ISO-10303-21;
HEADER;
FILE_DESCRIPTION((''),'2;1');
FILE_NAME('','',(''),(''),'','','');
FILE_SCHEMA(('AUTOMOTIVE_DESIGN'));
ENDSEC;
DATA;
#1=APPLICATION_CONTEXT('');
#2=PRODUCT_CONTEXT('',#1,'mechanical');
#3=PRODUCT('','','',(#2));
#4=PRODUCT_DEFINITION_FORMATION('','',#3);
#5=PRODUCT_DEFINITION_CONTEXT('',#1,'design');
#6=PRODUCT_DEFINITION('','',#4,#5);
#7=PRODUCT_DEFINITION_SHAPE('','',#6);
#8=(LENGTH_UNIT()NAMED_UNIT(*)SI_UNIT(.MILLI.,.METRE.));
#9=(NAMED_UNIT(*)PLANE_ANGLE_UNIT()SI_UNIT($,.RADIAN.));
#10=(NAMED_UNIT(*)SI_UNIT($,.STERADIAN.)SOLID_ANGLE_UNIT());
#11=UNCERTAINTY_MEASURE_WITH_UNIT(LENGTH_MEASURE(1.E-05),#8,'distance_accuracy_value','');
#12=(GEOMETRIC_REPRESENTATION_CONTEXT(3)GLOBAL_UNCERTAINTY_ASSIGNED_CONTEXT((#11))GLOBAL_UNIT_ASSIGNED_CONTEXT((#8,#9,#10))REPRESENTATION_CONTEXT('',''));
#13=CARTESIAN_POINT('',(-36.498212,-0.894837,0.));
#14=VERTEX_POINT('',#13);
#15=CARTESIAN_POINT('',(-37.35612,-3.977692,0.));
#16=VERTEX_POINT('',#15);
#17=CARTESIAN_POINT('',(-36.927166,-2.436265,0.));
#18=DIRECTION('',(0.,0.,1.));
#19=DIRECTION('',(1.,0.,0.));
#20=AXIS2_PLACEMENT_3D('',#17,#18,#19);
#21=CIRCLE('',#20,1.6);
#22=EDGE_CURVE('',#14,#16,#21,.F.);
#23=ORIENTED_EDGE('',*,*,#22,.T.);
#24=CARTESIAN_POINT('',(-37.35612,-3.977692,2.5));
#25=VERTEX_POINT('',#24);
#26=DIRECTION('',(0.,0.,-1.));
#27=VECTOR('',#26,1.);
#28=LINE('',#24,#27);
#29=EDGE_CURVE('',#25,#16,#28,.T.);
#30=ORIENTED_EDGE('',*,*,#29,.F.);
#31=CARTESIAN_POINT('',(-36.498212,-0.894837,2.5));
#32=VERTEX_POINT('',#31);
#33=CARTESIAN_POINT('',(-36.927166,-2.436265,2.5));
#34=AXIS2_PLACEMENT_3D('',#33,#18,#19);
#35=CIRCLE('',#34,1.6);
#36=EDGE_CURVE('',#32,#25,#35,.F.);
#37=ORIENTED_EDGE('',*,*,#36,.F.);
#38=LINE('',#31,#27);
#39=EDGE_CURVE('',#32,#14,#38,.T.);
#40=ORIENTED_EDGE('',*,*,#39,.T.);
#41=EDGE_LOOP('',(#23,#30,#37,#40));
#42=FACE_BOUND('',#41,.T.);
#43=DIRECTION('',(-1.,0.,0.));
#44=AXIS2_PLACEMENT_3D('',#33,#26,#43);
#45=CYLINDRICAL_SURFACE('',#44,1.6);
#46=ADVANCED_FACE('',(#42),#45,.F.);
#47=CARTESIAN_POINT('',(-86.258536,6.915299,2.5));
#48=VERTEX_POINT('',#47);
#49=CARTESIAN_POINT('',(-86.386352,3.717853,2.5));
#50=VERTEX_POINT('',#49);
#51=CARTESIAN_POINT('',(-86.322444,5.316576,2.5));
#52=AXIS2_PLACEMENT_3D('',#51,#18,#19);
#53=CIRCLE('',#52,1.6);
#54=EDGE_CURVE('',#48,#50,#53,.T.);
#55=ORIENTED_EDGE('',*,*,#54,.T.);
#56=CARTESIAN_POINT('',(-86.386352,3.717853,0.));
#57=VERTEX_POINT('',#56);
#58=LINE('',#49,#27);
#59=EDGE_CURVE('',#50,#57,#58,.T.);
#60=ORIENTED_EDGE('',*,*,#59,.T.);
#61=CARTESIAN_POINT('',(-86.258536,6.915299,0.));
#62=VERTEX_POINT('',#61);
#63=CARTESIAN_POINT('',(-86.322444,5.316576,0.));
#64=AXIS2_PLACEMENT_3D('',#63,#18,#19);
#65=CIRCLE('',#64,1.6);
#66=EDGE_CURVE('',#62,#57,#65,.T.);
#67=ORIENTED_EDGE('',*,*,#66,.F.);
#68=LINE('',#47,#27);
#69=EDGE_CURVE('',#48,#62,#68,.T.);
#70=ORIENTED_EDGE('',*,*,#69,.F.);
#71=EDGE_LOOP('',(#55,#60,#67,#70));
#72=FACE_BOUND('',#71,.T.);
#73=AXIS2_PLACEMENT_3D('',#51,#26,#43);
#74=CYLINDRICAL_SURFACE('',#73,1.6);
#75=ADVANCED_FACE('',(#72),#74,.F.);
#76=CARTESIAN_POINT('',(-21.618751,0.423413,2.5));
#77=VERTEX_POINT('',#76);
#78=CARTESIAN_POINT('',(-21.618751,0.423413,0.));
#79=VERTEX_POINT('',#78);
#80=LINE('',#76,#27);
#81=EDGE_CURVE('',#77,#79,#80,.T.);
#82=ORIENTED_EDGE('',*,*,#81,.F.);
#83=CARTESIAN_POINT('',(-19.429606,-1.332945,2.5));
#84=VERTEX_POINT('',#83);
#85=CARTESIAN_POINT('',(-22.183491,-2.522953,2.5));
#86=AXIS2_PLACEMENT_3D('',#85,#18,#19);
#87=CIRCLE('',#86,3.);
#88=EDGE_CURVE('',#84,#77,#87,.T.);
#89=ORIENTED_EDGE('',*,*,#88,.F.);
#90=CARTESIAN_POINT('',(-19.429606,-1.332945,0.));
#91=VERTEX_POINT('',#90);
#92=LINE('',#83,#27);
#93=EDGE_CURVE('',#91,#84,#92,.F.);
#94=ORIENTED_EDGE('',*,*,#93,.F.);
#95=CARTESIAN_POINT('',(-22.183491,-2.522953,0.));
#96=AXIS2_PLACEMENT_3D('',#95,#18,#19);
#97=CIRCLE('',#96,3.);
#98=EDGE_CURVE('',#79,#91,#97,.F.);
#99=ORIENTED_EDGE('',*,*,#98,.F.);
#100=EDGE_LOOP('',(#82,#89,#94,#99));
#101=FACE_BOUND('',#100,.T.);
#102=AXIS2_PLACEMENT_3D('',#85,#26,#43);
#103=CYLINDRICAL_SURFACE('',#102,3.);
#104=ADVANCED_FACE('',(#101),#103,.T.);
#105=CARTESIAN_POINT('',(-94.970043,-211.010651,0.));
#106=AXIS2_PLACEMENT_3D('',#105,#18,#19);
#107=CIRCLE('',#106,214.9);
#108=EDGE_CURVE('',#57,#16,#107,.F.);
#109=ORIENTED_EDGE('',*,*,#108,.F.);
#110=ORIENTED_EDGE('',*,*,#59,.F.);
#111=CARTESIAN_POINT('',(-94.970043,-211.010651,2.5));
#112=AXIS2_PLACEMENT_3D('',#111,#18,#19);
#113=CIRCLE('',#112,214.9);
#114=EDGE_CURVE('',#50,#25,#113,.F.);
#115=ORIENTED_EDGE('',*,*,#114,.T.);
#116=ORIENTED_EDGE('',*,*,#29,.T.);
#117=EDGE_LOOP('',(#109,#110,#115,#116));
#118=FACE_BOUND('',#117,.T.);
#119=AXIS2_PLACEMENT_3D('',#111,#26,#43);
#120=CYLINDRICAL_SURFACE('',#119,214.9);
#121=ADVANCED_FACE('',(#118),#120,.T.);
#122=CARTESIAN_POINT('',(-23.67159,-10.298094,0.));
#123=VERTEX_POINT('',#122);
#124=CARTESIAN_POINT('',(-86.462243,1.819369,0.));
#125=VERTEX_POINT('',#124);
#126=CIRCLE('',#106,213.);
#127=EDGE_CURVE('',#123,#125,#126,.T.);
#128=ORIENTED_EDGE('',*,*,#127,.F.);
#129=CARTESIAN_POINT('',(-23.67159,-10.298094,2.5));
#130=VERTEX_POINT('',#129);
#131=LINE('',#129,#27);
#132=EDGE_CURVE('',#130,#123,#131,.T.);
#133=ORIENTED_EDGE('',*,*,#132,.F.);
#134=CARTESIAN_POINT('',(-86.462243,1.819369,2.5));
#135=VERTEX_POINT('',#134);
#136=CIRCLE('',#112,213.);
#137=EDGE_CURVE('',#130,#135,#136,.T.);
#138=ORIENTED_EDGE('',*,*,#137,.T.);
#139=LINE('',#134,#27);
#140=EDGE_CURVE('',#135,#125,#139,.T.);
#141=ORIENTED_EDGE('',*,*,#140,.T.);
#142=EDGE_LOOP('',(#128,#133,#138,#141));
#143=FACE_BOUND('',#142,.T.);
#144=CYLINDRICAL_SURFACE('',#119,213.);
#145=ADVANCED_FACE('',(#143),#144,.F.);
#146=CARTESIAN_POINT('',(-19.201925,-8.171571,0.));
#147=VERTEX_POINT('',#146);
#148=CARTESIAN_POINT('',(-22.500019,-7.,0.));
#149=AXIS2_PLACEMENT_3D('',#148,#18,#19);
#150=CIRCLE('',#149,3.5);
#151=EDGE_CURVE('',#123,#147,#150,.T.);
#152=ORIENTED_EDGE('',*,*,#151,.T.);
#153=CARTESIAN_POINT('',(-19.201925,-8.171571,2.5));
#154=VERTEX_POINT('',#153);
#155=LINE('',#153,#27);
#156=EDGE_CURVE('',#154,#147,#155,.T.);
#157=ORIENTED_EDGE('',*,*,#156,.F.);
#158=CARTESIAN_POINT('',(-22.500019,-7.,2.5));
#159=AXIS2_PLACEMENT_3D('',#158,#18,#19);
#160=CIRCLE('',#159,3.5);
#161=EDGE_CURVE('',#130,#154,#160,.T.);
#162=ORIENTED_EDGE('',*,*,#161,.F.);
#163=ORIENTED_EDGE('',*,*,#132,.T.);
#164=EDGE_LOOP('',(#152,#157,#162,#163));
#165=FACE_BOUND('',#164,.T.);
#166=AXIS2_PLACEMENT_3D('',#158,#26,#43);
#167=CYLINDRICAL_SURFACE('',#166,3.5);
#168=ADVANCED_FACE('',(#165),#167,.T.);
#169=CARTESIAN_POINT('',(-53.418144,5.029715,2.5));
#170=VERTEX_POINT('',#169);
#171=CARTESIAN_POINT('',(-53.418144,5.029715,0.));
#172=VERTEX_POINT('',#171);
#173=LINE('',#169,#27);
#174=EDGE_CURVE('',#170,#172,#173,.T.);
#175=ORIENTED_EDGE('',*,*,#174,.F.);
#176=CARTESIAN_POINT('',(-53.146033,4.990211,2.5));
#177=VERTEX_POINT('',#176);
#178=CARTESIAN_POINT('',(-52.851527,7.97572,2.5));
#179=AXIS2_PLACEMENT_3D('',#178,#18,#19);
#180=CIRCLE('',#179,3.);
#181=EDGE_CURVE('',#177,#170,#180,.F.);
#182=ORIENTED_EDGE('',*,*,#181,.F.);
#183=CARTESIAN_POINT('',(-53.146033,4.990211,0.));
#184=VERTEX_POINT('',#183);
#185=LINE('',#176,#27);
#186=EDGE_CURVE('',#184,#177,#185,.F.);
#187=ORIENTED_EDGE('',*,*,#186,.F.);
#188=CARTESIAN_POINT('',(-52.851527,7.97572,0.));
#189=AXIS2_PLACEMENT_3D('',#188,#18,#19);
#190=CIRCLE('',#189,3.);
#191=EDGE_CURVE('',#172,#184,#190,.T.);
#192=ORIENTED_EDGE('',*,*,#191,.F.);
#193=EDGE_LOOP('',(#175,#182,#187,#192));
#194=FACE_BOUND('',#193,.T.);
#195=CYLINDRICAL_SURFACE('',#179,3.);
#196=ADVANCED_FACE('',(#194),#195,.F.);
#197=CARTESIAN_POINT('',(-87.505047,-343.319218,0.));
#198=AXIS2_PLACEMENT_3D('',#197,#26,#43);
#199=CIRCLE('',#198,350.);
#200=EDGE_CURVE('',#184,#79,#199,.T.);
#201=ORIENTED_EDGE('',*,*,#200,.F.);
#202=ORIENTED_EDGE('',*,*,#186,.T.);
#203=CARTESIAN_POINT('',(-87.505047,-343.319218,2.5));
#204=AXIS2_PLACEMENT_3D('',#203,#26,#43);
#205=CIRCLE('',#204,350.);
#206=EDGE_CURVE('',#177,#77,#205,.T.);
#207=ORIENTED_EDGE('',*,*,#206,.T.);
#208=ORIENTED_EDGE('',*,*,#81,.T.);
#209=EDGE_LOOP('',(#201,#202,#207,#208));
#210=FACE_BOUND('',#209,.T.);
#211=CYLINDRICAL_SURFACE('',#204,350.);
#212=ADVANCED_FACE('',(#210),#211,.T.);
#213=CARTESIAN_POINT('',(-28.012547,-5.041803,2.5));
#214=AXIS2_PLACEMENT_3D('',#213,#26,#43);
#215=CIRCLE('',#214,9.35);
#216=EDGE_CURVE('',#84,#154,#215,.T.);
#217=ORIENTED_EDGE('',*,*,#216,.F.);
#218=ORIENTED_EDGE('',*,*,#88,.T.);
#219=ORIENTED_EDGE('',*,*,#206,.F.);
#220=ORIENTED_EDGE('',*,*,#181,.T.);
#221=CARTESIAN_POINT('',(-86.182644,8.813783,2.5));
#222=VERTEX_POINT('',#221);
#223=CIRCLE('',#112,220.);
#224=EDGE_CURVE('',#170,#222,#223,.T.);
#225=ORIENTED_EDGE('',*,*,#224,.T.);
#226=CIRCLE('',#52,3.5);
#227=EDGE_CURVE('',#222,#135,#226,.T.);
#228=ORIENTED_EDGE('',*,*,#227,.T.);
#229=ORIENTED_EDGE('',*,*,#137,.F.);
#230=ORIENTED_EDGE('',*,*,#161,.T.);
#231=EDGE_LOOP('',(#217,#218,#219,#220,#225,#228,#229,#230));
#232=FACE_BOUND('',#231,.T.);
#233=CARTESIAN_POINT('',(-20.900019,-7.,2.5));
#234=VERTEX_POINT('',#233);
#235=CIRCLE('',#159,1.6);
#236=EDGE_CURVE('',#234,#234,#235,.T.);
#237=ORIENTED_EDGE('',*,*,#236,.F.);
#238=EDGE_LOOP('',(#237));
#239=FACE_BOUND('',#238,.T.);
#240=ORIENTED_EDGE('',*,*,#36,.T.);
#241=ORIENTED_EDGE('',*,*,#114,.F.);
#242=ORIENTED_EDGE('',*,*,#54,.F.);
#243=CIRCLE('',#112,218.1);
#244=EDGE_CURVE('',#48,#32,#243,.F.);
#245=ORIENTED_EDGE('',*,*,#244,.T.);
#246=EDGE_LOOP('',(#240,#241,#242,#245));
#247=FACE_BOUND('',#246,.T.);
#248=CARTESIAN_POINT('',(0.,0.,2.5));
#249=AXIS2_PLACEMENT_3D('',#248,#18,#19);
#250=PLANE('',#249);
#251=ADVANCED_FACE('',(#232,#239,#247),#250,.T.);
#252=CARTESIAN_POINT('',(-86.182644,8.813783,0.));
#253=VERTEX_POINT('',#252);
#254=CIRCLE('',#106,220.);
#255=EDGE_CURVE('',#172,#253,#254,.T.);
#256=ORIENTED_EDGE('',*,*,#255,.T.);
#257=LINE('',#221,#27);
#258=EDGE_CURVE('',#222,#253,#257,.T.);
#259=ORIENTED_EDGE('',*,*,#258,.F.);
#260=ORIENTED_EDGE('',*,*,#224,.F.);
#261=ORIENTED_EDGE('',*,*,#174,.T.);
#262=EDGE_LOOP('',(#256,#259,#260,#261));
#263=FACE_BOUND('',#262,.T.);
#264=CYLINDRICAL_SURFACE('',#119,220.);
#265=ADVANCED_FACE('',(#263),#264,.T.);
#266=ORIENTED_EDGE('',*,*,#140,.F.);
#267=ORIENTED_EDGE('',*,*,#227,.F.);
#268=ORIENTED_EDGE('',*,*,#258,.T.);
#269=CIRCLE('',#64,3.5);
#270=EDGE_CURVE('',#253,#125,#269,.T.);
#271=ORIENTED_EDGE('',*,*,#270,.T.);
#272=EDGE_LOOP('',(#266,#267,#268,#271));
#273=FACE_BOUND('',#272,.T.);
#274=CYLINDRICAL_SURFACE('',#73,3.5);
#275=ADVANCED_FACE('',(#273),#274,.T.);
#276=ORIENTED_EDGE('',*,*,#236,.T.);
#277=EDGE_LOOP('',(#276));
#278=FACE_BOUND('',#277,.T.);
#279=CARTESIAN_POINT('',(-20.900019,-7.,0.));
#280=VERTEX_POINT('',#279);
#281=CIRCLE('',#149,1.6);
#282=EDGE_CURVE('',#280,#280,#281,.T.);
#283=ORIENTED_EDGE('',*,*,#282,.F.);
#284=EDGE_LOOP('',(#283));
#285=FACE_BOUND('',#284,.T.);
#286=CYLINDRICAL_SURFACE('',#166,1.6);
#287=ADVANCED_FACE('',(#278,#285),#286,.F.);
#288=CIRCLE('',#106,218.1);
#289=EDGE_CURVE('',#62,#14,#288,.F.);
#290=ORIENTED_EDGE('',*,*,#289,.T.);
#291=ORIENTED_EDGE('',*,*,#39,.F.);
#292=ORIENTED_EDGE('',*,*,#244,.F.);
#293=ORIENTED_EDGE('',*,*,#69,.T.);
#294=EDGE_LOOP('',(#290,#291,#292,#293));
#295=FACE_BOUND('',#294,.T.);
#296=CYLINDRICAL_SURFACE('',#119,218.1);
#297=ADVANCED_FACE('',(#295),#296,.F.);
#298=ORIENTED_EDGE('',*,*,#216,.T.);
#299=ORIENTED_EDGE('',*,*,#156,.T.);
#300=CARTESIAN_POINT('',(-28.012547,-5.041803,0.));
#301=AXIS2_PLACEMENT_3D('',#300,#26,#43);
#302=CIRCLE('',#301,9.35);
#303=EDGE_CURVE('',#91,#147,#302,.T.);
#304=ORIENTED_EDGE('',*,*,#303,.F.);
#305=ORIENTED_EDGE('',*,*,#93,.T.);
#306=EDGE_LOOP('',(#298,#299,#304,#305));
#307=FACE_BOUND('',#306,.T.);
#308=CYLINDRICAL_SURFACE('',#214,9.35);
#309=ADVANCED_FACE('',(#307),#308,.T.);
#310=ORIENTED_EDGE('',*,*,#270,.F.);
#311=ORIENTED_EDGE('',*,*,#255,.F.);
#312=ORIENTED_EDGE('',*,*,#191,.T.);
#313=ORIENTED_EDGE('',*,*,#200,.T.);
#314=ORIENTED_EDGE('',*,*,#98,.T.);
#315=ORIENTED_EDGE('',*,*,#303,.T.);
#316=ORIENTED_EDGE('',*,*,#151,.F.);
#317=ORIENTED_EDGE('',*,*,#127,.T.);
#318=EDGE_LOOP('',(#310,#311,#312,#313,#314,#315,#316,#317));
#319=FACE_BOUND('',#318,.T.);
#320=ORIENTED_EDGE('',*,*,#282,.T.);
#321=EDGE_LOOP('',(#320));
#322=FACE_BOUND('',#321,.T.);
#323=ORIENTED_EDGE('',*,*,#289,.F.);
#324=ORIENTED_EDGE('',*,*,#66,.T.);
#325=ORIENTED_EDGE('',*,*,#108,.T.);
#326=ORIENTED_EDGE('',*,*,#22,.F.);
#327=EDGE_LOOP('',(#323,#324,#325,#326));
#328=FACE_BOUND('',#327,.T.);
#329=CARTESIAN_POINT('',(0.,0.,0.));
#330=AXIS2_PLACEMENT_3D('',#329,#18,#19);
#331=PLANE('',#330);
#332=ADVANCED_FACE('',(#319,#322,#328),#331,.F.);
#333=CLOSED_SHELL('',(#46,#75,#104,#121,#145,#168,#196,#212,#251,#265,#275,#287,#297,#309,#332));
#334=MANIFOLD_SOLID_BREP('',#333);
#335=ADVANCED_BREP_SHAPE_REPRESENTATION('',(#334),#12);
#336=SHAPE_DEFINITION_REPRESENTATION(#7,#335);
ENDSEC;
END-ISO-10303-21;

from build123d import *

# Parameters (mm, degrees)
BOSS_EXTRUDE1_DEPTH = 2.5
BOSS_EXTRUDE2_DEPTH = 2.5
FILLET1_R           = 3


with BuildPart() as part:
    # Sketch1 → Boss-Extrude1 (new body)
    with BuildSketch(Plane.XY):
        with BuildLine():
            ThreePointArc((-36.498211921, -0.894837407), (-30.682272217, -2.600735992), (-24.91598031, -4.467584206))
            ThreePointArc((-24.91598031, -4.467584206), (-23.230561506, -3.577090815), (-21.328447916, -3.701906342))
            ThreePointArc((-21.328447916, -3.701906342), (-53.283170108, 5.003711479), (-86.182644365, 8.813783084))
            ThreePointArc((-86.182644365, 8.813783084), (-89.819650793, 5.456375715), (-86.462243424, 1.819369287))
            ThreePointArc((-86.462243424, 1.819369287), (-54.60957062, -1.869472767), (-23.671589589, -10.298093658))
            ThreePointArc((-23.671589589, -10.298093658), (-25.210339365, -9.214534302), (-25.965452096, -7.490684972))
            ThreePointArc((-25.965452096, -7.490684972), (-31.636424249, -5.655196046), (-37.356120498, -3.977692071))
            ThreePointArc((-37.356120498, -3.977692071), (-61.648333057, 1.290252949), (-86.386352251, 3.717853032))
            ThreePointArc((-86.386352251, 3.717853032), (-87.921167048, 5.380484542), (-86.258535538, 6.915299339))
            ThreePointArc((-86.258535538, 6.915299339), (-61.152151238, 4.451550721), (-36.498211921, -0.894837407))
        make_face()
        with BuildLine():
            ThreePointArc((-21.964443513, -5.492300042), (-21.192937962, -6.077210854), (-20.900018752, -7))
            ThreePointArc((-20.900018752, -7), (-21.577229606, -8.30708079), (-23.035593992, -8.507699958))
            ThreePointArc((-23.035593992, -8.507699958), (-24.498688375, -7.993907076), (-25.965452096, -7.490684972))
            ThreePointArc((-25.965452096, -7.490684972), (-25.210339365, -9.214534302), (-23.671589589, -10.298093658))
            ThreePointArc((-23.671589589, -10.298093658), (-20.481417495, -9.859239228), (-19.000018752, -7))
            ThreePointArc((-19.000018752, -7), (-19.640779524, -4.981398743), (-21.328447916, -3.701906342))
            ThreePointArc((-21.328447916, -3.701906342), (-23.230561506, -3.577090815), (-24.91598031, -4.467584206))
            ThreePointArc((-24.91598031, -4.467584206), (-23.438376962, -4.974656833), (-21.964443513, -5.492300042))
        make_face()
        with BuildLine():
            ThreePointArc((-23.035593992, -8.507699958), (-24.00771871, -6.46442476), (-21.964443513, -5.492300042))
            ThreePointArc((-21.964443513, -5.492300042), (-23.438376962, -4.974656833), (-24.91598031, -4.467584206))
            ThreePointArc((-24.91598031, -4.467584206), (-25.806449767, -5.852169897), (-25.965452096, -7.490684972))
            ThreePointArc((-25.965452096, -7.490684972), (-24.498688375, -7.993907076), (-23.035593992, -8.507699958))
        make_face()
        with BuildLine():
            ThreePointArc((-25.965452096, -7.490684972), (-25.806449767, -5.852169897), (-24.91598031, -4.467584206))
            ThreePointArc((-24.91598031, -4.467584206), (-30.682272217, -2.600735992), (-36.498211921, -0.894837407))
            ThreePointArc((-36.498211921, -0.894837407), (-35.385738878, -2.865219027), (-37.356120498, -3.977692071))
            ThreePointArc((-37.356120498, -3.977692071), (-31.636424249, -5.655196046), (-25.965452096, -7.490684972))
        make_face()
    extrude(amount=BOSS_EXTRUDE1_DEPTH)

    # Sketch2 → Boss-Extrude2 (add)
    with BuildSketch(Plane(origin=(0, 0, 0), x_dir=(-1, 0, 0), z_dir=(0, 0, -1))):
        with BuildLine():
            ThreePointArc((53.283170108, 5.003711479), (36.704107241, 2.974392367), (20.240739247, 0.156418643))
            ThreePointArc((20.240739247, 0.156418643), (18.734449346, -3.884474615), (19.201925094, -8.171570836))
            ThreePointArc((19.201925094, -8.171570836), (19.339488679, -5.496321293), (21.328447916, -3.701906342))
            ThreePointArc((21.328447916, -3.701906342), (37.141755573, 1.253074886), (53.283170108, 5.003711479))
        make_face()
    extrude(amount=-BOSS_EXTRUDE2_DEPTH)

    # Fillet1
    # the kernel refuses this fillet: 3 mm, written as the material it adds along each edge
    with BuildSketch(Plane(origin=(-53.283170108, 5.003711479, 0), x_dir=(-0.9819426110261866, 0.1891790386144179, 0), z_dir=(0, 0, 1))) as fillet1_piece_1:
        with BuildLine():
            CenterArc((0.138392848, -2.999999854), FILLET1_R, 90.017899156, 5.253257813)
            ThreePointArc((-0.137215119, -0.012686638), (-0.068606935, -0.006350072), (0, 0))
            ThreePointArc((0, 0), (0.068727825, -1.0735e-05), (0.13745565, 0))
        make_face()
    extrude(amount=2.5)
    # the kernel refuses this fillet: 3 mm, written as the material it takes off along each edge
    with BuildSketch(Plane(origin=(-20.240739247, 0.156418643, -4.239797149), x_dir=(0.4782853989003676, -0.8782044620694638, 0), z_dir=(0, 0, 1))) as fillet1_2_piece_1:
        with BuildLine():
            CenterArc((1.423846315, -2.987637282), FILLET1_R, 84.796647689, 55.779400765)
            ThreePointArc((-0.893558187, -1.082476824), (-0.447321739, -0.540790471), (0, 0))
            ThreePointArc((0, 0), (0.84795943, 0.03853047), (1.69591886, 0))
        make_face()
    extrude(amount=10.979594298, mode=Mode.SUBTRACT)


solid = part.part
